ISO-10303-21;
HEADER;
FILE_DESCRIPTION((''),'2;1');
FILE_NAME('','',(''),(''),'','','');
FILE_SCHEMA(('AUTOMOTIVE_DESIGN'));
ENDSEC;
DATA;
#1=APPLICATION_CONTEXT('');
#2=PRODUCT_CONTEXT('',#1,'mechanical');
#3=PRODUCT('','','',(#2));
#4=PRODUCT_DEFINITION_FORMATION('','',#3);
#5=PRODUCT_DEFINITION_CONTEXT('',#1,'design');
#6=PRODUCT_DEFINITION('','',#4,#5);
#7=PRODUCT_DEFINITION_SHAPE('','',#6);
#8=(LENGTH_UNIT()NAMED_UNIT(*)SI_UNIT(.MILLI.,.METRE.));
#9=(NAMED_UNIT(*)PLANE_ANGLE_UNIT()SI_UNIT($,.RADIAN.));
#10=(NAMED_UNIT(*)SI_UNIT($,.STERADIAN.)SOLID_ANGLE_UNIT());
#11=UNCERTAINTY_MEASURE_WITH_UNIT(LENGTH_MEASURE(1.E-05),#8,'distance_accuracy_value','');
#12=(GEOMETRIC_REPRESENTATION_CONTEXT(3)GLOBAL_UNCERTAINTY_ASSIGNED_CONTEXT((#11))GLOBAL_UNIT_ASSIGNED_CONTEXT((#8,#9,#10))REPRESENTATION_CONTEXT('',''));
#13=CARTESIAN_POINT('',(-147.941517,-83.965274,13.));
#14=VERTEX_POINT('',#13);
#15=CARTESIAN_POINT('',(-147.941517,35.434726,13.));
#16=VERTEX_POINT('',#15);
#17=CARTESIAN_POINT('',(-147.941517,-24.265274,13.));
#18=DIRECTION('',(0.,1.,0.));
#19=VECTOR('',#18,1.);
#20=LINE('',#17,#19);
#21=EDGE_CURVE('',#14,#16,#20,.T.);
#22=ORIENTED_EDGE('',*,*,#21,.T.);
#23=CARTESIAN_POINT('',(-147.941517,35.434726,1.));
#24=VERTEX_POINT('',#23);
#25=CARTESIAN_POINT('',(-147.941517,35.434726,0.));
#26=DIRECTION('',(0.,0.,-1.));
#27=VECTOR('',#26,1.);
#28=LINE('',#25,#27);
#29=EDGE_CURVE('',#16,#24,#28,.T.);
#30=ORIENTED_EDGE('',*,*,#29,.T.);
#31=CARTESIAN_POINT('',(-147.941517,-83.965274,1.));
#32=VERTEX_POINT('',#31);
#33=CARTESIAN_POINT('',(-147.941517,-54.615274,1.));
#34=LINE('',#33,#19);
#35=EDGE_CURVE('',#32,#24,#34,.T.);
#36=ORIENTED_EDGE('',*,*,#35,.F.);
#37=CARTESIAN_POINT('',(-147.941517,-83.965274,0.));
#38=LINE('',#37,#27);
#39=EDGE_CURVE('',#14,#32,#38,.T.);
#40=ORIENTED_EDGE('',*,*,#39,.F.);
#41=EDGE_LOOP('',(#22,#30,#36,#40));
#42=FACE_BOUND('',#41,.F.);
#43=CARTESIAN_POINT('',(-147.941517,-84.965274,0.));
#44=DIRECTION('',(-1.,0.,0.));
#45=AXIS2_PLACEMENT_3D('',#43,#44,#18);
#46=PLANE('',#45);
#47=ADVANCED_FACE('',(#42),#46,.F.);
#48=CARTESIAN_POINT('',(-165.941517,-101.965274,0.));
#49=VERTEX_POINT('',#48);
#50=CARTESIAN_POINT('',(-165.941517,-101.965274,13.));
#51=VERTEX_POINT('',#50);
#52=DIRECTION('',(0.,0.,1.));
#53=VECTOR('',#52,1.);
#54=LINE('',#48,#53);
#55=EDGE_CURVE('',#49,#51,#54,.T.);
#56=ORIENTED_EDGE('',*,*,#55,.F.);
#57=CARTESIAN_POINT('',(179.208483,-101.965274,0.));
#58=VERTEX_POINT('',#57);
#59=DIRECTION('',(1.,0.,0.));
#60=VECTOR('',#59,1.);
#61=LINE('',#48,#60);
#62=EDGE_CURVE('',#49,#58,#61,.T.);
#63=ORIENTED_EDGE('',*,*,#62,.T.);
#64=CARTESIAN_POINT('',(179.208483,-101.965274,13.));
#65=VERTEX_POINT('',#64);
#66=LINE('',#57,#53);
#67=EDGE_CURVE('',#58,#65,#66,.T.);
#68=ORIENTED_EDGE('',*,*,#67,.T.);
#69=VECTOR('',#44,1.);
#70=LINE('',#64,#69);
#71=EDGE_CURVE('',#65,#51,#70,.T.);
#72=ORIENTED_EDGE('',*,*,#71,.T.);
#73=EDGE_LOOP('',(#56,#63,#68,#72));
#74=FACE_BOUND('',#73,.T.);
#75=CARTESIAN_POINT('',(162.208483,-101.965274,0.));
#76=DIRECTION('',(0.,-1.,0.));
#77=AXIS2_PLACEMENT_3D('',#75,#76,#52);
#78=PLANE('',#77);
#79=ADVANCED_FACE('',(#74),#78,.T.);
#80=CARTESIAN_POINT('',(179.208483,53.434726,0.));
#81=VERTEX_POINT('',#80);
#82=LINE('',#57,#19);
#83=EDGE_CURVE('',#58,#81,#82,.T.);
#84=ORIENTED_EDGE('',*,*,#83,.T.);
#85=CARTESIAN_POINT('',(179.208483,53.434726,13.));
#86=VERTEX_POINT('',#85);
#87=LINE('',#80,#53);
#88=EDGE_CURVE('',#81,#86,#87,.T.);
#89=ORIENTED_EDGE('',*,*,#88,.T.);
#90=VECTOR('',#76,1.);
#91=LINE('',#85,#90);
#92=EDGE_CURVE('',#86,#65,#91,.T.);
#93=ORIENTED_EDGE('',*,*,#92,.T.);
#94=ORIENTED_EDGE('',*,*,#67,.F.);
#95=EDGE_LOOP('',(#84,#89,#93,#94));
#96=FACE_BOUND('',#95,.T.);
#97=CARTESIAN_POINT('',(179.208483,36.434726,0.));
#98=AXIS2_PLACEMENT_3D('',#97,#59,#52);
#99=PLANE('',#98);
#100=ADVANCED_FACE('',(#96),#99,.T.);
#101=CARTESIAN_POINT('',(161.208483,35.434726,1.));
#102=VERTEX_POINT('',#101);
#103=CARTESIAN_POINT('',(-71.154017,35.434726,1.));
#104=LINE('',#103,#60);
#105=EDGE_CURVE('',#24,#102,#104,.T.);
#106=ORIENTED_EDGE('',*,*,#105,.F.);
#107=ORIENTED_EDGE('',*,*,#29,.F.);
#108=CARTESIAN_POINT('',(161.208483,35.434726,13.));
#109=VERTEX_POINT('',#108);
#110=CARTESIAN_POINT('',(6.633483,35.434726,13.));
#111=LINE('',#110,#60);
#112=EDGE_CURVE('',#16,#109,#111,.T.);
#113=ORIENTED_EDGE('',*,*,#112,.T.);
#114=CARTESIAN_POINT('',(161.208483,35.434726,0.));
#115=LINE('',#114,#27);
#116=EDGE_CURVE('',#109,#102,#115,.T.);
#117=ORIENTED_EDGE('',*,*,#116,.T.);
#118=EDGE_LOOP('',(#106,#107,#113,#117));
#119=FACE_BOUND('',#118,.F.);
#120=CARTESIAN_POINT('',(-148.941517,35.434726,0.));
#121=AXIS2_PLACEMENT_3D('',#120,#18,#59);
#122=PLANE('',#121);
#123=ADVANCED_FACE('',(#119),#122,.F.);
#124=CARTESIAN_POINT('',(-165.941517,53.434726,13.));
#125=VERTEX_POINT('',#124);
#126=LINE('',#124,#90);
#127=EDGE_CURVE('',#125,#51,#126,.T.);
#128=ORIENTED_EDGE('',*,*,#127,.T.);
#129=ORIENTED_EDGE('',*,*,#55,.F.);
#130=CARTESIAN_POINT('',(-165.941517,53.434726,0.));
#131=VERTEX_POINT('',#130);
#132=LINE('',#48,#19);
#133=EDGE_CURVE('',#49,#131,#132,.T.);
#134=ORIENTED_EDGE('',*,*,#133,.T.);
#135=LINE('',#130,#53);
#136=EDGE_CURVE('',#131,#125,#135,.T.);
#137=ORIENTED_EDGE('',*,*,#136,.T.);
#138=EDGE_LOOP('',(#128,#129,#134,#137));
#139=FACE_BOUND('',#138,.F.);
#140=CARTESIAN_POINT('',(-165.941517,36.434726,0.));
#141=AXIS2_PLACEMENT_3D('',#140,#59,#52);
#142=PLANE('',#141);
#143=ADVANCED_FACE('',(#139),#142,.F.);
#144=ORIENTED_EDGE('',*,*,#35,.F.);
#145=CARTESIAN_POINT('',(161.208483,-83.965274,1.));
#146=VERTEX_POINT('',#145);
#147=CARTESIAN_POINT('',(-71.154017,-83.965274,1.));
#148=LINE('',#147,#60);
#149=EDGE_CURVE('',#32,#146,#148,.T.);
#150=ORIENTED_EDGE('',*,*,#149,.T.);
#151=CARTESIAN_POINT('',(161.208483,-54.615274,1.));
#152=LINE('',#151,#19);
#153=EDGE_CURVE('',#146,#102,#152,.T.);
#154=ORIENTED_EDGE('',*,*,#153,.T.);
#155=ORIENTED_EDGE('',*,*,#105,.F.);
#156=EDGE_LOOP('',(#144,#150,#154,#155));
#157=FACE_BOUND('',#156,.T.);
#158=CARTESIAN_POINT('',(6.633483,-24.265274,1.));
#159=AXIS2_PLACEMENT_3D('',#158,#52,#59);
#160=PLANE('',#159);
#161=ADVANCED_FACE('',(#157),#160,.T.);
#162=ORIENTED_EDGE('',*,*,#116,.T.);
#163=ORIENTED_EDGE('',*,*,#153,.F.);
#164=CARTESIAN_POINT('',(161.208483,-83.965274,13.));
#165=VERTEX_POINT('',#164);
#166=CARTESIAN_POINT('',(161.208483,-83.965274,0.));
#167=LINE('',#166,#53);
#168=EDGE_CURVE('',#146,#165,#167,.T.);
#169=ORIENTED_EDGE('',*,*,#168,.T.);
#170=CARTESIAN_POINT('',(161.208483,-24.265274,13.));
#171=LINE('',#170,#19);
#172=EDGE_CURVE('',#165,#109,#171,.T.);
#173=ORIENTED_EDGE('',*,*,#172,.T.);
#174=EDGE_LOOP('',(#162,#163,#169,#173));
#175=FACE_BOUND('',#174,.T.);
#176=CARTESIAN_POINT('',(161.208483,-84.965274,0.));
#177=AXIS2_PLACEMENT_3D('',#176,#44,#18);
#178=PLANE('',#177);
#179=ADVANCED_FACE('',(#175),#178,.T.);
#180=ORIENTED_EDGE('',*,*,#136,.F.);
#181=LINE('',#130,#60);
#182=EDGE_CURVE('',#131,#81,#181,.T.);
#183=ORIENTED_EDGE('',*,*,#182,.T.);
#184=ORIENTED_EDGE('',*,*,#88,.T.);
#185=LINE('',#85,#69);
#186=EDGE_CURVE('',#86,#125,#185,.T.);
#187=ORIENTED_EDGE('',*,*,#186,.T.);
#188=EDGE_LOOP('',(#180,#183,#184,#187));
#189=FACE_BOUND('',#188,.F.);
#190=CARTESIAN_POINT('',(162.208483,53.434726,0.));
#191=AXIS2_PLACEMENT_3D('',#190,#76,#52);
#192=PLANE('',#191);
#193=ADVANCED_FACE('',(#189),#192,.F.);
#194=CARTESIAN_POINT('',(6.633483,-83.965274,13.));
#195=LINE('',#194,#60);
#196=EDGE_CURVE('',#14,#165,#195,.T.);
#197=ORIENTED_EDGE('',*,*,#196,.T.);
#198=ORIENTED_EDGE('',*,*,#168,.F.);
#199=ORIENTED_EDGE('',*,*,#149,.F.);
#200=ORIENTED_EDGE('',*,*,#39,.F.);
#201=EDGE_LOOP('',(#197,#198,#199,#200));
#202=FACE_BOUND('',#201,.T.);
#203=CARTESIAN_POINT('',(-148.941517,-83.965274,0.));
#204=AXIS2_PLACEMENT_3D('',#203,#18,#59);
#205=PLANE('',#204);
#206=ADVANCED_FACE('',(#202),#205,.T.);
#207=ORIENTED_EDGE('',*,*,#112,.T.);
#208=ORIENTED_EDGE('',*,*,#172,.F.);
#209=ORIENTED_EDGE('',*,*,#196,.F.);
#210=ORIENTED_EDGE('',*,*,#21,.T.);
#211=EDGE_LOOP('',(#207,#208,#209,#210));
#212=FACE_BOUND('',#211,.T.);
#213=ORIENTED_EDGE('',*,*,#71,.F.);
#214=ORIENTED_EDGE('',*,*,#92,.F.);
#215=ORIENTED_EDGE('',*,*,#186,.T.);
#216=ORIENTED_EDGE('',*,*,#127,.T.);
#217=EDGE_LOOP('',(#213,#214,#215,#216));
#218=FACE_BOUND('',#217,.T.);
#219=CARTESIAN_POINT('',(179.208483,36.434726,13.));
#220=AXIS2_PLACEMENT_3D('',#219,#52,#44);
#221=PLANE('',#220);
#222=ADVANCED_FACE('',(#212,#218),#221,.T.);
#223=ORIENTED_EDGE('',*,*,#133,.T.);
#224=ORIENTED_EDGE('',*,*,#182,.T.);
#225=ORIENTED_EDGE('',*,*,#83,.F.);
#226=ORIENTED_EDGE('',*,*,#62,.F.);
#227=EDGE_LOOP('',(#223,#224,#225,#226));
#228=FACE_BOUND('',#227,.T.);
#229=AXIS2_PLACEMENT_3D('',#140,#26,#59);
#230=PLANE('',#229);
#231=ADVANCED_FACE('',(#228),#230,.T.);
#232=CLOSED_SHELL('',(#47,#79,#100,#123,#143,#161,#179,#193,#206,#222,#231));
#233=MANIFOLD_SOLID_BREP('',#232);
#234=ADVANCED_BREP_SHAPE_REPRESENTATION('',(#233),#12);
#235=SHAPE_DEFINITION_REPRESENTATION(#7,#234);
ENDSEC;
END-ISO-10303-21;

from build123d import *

# Parameters (mm, degrees)
F0_W     = 311.15
F0_H     = 121.4
F0_R     = 2.5
F0_R_2   = 2
F1_DEPTH = 13
F2_T     = -1
F4_DEPTH = 17
F5_DEPTH = 17
F6_DEPTH = 17
F7_DEPTH = 17


# Not quite as in the source:
# - the program builds the solid bodies; features that only make, move or delete a surface that nothing else refers to are left out


with BuildPart() as f1:
    # F0 (on Top) → F1 (new body)
    with BuildSketch(Plane.XY):
        with Locations((6.6334828734, -24.2652736852)):
            Rectangle(F0_W, F0_H)
        with Locations((-116.9415171266, -32.9652736852)):
            Circle(F0_R, mode=Mode.SUBTRACT)
        with Locations((-61.4415171266, -23.5952736852)):
            Circle(F0_R_2, mode=Mode.SUBTRACT)
        with Locations((74.7084828734, -23.5652736852)):
            Circle(F0_R_2, mode=Mode.SUBTRACT)
        with Locations((114.5584828734, -13.7852736852)):
            Circle(F0_R, mode=Mode.SUBTRACT)
        with Locations((-116.9415171266, -32.9652736852)):
            Circle(F0_R)
        with Locations((114.5584828734, -13.7852736852)):
            Circle(F0_R)
        with Locations((-61.4415171266, -23.5952736852)):
            Circle(F0_R_2)
        with Locations((74.7084828734, -23.5652736852)):
            Circle(F0_R_2)
    extrude(amount=F1_DEPTH)

    # F2
    f2_openings = [f1.faces().sort_by_distance(p)[0] for p in [
        (6.633483, -24.265274, 13),
    ]]
    offset(amount=F2_T, openings=f2_openings)

    # F4 (add): a face of the model
    f4_faces = [f1.faces().sort_by_distance(p)[0] for p in [
        (6.6334828734, -84.9652736852, 6.5),
    ]]
    extrude(f4_faces, amount=F4_DEPTH)

    # F5 (add): a face of the model
    f5_faces = [f1.faces().sort_by_distance(p)[0] for p in [
        (-148.9415171266, -32.7652736852, 6.5),
    ]]
    extrude(f5_faces, amount=F5_DEPTH)

    # F6 (add): a face of the model
    f6_faces = [f1.faces().sort_by_distance(p)[0] for p in [
        (162.2084828734, -32.7652736852, 6.5),
    ]]
    extrude(f6_faces, amount=F6_DEPTH)

    # F7 (add): a face of the model
    f7_faces = [f1.faces().sort_by_distance(p)[0] for p in [
        (6.6334828734, 36.4347263148, 6.5),
    ]]
    extrude(f7_faces, amount=F7_DEPTH)


solid = f1.part
